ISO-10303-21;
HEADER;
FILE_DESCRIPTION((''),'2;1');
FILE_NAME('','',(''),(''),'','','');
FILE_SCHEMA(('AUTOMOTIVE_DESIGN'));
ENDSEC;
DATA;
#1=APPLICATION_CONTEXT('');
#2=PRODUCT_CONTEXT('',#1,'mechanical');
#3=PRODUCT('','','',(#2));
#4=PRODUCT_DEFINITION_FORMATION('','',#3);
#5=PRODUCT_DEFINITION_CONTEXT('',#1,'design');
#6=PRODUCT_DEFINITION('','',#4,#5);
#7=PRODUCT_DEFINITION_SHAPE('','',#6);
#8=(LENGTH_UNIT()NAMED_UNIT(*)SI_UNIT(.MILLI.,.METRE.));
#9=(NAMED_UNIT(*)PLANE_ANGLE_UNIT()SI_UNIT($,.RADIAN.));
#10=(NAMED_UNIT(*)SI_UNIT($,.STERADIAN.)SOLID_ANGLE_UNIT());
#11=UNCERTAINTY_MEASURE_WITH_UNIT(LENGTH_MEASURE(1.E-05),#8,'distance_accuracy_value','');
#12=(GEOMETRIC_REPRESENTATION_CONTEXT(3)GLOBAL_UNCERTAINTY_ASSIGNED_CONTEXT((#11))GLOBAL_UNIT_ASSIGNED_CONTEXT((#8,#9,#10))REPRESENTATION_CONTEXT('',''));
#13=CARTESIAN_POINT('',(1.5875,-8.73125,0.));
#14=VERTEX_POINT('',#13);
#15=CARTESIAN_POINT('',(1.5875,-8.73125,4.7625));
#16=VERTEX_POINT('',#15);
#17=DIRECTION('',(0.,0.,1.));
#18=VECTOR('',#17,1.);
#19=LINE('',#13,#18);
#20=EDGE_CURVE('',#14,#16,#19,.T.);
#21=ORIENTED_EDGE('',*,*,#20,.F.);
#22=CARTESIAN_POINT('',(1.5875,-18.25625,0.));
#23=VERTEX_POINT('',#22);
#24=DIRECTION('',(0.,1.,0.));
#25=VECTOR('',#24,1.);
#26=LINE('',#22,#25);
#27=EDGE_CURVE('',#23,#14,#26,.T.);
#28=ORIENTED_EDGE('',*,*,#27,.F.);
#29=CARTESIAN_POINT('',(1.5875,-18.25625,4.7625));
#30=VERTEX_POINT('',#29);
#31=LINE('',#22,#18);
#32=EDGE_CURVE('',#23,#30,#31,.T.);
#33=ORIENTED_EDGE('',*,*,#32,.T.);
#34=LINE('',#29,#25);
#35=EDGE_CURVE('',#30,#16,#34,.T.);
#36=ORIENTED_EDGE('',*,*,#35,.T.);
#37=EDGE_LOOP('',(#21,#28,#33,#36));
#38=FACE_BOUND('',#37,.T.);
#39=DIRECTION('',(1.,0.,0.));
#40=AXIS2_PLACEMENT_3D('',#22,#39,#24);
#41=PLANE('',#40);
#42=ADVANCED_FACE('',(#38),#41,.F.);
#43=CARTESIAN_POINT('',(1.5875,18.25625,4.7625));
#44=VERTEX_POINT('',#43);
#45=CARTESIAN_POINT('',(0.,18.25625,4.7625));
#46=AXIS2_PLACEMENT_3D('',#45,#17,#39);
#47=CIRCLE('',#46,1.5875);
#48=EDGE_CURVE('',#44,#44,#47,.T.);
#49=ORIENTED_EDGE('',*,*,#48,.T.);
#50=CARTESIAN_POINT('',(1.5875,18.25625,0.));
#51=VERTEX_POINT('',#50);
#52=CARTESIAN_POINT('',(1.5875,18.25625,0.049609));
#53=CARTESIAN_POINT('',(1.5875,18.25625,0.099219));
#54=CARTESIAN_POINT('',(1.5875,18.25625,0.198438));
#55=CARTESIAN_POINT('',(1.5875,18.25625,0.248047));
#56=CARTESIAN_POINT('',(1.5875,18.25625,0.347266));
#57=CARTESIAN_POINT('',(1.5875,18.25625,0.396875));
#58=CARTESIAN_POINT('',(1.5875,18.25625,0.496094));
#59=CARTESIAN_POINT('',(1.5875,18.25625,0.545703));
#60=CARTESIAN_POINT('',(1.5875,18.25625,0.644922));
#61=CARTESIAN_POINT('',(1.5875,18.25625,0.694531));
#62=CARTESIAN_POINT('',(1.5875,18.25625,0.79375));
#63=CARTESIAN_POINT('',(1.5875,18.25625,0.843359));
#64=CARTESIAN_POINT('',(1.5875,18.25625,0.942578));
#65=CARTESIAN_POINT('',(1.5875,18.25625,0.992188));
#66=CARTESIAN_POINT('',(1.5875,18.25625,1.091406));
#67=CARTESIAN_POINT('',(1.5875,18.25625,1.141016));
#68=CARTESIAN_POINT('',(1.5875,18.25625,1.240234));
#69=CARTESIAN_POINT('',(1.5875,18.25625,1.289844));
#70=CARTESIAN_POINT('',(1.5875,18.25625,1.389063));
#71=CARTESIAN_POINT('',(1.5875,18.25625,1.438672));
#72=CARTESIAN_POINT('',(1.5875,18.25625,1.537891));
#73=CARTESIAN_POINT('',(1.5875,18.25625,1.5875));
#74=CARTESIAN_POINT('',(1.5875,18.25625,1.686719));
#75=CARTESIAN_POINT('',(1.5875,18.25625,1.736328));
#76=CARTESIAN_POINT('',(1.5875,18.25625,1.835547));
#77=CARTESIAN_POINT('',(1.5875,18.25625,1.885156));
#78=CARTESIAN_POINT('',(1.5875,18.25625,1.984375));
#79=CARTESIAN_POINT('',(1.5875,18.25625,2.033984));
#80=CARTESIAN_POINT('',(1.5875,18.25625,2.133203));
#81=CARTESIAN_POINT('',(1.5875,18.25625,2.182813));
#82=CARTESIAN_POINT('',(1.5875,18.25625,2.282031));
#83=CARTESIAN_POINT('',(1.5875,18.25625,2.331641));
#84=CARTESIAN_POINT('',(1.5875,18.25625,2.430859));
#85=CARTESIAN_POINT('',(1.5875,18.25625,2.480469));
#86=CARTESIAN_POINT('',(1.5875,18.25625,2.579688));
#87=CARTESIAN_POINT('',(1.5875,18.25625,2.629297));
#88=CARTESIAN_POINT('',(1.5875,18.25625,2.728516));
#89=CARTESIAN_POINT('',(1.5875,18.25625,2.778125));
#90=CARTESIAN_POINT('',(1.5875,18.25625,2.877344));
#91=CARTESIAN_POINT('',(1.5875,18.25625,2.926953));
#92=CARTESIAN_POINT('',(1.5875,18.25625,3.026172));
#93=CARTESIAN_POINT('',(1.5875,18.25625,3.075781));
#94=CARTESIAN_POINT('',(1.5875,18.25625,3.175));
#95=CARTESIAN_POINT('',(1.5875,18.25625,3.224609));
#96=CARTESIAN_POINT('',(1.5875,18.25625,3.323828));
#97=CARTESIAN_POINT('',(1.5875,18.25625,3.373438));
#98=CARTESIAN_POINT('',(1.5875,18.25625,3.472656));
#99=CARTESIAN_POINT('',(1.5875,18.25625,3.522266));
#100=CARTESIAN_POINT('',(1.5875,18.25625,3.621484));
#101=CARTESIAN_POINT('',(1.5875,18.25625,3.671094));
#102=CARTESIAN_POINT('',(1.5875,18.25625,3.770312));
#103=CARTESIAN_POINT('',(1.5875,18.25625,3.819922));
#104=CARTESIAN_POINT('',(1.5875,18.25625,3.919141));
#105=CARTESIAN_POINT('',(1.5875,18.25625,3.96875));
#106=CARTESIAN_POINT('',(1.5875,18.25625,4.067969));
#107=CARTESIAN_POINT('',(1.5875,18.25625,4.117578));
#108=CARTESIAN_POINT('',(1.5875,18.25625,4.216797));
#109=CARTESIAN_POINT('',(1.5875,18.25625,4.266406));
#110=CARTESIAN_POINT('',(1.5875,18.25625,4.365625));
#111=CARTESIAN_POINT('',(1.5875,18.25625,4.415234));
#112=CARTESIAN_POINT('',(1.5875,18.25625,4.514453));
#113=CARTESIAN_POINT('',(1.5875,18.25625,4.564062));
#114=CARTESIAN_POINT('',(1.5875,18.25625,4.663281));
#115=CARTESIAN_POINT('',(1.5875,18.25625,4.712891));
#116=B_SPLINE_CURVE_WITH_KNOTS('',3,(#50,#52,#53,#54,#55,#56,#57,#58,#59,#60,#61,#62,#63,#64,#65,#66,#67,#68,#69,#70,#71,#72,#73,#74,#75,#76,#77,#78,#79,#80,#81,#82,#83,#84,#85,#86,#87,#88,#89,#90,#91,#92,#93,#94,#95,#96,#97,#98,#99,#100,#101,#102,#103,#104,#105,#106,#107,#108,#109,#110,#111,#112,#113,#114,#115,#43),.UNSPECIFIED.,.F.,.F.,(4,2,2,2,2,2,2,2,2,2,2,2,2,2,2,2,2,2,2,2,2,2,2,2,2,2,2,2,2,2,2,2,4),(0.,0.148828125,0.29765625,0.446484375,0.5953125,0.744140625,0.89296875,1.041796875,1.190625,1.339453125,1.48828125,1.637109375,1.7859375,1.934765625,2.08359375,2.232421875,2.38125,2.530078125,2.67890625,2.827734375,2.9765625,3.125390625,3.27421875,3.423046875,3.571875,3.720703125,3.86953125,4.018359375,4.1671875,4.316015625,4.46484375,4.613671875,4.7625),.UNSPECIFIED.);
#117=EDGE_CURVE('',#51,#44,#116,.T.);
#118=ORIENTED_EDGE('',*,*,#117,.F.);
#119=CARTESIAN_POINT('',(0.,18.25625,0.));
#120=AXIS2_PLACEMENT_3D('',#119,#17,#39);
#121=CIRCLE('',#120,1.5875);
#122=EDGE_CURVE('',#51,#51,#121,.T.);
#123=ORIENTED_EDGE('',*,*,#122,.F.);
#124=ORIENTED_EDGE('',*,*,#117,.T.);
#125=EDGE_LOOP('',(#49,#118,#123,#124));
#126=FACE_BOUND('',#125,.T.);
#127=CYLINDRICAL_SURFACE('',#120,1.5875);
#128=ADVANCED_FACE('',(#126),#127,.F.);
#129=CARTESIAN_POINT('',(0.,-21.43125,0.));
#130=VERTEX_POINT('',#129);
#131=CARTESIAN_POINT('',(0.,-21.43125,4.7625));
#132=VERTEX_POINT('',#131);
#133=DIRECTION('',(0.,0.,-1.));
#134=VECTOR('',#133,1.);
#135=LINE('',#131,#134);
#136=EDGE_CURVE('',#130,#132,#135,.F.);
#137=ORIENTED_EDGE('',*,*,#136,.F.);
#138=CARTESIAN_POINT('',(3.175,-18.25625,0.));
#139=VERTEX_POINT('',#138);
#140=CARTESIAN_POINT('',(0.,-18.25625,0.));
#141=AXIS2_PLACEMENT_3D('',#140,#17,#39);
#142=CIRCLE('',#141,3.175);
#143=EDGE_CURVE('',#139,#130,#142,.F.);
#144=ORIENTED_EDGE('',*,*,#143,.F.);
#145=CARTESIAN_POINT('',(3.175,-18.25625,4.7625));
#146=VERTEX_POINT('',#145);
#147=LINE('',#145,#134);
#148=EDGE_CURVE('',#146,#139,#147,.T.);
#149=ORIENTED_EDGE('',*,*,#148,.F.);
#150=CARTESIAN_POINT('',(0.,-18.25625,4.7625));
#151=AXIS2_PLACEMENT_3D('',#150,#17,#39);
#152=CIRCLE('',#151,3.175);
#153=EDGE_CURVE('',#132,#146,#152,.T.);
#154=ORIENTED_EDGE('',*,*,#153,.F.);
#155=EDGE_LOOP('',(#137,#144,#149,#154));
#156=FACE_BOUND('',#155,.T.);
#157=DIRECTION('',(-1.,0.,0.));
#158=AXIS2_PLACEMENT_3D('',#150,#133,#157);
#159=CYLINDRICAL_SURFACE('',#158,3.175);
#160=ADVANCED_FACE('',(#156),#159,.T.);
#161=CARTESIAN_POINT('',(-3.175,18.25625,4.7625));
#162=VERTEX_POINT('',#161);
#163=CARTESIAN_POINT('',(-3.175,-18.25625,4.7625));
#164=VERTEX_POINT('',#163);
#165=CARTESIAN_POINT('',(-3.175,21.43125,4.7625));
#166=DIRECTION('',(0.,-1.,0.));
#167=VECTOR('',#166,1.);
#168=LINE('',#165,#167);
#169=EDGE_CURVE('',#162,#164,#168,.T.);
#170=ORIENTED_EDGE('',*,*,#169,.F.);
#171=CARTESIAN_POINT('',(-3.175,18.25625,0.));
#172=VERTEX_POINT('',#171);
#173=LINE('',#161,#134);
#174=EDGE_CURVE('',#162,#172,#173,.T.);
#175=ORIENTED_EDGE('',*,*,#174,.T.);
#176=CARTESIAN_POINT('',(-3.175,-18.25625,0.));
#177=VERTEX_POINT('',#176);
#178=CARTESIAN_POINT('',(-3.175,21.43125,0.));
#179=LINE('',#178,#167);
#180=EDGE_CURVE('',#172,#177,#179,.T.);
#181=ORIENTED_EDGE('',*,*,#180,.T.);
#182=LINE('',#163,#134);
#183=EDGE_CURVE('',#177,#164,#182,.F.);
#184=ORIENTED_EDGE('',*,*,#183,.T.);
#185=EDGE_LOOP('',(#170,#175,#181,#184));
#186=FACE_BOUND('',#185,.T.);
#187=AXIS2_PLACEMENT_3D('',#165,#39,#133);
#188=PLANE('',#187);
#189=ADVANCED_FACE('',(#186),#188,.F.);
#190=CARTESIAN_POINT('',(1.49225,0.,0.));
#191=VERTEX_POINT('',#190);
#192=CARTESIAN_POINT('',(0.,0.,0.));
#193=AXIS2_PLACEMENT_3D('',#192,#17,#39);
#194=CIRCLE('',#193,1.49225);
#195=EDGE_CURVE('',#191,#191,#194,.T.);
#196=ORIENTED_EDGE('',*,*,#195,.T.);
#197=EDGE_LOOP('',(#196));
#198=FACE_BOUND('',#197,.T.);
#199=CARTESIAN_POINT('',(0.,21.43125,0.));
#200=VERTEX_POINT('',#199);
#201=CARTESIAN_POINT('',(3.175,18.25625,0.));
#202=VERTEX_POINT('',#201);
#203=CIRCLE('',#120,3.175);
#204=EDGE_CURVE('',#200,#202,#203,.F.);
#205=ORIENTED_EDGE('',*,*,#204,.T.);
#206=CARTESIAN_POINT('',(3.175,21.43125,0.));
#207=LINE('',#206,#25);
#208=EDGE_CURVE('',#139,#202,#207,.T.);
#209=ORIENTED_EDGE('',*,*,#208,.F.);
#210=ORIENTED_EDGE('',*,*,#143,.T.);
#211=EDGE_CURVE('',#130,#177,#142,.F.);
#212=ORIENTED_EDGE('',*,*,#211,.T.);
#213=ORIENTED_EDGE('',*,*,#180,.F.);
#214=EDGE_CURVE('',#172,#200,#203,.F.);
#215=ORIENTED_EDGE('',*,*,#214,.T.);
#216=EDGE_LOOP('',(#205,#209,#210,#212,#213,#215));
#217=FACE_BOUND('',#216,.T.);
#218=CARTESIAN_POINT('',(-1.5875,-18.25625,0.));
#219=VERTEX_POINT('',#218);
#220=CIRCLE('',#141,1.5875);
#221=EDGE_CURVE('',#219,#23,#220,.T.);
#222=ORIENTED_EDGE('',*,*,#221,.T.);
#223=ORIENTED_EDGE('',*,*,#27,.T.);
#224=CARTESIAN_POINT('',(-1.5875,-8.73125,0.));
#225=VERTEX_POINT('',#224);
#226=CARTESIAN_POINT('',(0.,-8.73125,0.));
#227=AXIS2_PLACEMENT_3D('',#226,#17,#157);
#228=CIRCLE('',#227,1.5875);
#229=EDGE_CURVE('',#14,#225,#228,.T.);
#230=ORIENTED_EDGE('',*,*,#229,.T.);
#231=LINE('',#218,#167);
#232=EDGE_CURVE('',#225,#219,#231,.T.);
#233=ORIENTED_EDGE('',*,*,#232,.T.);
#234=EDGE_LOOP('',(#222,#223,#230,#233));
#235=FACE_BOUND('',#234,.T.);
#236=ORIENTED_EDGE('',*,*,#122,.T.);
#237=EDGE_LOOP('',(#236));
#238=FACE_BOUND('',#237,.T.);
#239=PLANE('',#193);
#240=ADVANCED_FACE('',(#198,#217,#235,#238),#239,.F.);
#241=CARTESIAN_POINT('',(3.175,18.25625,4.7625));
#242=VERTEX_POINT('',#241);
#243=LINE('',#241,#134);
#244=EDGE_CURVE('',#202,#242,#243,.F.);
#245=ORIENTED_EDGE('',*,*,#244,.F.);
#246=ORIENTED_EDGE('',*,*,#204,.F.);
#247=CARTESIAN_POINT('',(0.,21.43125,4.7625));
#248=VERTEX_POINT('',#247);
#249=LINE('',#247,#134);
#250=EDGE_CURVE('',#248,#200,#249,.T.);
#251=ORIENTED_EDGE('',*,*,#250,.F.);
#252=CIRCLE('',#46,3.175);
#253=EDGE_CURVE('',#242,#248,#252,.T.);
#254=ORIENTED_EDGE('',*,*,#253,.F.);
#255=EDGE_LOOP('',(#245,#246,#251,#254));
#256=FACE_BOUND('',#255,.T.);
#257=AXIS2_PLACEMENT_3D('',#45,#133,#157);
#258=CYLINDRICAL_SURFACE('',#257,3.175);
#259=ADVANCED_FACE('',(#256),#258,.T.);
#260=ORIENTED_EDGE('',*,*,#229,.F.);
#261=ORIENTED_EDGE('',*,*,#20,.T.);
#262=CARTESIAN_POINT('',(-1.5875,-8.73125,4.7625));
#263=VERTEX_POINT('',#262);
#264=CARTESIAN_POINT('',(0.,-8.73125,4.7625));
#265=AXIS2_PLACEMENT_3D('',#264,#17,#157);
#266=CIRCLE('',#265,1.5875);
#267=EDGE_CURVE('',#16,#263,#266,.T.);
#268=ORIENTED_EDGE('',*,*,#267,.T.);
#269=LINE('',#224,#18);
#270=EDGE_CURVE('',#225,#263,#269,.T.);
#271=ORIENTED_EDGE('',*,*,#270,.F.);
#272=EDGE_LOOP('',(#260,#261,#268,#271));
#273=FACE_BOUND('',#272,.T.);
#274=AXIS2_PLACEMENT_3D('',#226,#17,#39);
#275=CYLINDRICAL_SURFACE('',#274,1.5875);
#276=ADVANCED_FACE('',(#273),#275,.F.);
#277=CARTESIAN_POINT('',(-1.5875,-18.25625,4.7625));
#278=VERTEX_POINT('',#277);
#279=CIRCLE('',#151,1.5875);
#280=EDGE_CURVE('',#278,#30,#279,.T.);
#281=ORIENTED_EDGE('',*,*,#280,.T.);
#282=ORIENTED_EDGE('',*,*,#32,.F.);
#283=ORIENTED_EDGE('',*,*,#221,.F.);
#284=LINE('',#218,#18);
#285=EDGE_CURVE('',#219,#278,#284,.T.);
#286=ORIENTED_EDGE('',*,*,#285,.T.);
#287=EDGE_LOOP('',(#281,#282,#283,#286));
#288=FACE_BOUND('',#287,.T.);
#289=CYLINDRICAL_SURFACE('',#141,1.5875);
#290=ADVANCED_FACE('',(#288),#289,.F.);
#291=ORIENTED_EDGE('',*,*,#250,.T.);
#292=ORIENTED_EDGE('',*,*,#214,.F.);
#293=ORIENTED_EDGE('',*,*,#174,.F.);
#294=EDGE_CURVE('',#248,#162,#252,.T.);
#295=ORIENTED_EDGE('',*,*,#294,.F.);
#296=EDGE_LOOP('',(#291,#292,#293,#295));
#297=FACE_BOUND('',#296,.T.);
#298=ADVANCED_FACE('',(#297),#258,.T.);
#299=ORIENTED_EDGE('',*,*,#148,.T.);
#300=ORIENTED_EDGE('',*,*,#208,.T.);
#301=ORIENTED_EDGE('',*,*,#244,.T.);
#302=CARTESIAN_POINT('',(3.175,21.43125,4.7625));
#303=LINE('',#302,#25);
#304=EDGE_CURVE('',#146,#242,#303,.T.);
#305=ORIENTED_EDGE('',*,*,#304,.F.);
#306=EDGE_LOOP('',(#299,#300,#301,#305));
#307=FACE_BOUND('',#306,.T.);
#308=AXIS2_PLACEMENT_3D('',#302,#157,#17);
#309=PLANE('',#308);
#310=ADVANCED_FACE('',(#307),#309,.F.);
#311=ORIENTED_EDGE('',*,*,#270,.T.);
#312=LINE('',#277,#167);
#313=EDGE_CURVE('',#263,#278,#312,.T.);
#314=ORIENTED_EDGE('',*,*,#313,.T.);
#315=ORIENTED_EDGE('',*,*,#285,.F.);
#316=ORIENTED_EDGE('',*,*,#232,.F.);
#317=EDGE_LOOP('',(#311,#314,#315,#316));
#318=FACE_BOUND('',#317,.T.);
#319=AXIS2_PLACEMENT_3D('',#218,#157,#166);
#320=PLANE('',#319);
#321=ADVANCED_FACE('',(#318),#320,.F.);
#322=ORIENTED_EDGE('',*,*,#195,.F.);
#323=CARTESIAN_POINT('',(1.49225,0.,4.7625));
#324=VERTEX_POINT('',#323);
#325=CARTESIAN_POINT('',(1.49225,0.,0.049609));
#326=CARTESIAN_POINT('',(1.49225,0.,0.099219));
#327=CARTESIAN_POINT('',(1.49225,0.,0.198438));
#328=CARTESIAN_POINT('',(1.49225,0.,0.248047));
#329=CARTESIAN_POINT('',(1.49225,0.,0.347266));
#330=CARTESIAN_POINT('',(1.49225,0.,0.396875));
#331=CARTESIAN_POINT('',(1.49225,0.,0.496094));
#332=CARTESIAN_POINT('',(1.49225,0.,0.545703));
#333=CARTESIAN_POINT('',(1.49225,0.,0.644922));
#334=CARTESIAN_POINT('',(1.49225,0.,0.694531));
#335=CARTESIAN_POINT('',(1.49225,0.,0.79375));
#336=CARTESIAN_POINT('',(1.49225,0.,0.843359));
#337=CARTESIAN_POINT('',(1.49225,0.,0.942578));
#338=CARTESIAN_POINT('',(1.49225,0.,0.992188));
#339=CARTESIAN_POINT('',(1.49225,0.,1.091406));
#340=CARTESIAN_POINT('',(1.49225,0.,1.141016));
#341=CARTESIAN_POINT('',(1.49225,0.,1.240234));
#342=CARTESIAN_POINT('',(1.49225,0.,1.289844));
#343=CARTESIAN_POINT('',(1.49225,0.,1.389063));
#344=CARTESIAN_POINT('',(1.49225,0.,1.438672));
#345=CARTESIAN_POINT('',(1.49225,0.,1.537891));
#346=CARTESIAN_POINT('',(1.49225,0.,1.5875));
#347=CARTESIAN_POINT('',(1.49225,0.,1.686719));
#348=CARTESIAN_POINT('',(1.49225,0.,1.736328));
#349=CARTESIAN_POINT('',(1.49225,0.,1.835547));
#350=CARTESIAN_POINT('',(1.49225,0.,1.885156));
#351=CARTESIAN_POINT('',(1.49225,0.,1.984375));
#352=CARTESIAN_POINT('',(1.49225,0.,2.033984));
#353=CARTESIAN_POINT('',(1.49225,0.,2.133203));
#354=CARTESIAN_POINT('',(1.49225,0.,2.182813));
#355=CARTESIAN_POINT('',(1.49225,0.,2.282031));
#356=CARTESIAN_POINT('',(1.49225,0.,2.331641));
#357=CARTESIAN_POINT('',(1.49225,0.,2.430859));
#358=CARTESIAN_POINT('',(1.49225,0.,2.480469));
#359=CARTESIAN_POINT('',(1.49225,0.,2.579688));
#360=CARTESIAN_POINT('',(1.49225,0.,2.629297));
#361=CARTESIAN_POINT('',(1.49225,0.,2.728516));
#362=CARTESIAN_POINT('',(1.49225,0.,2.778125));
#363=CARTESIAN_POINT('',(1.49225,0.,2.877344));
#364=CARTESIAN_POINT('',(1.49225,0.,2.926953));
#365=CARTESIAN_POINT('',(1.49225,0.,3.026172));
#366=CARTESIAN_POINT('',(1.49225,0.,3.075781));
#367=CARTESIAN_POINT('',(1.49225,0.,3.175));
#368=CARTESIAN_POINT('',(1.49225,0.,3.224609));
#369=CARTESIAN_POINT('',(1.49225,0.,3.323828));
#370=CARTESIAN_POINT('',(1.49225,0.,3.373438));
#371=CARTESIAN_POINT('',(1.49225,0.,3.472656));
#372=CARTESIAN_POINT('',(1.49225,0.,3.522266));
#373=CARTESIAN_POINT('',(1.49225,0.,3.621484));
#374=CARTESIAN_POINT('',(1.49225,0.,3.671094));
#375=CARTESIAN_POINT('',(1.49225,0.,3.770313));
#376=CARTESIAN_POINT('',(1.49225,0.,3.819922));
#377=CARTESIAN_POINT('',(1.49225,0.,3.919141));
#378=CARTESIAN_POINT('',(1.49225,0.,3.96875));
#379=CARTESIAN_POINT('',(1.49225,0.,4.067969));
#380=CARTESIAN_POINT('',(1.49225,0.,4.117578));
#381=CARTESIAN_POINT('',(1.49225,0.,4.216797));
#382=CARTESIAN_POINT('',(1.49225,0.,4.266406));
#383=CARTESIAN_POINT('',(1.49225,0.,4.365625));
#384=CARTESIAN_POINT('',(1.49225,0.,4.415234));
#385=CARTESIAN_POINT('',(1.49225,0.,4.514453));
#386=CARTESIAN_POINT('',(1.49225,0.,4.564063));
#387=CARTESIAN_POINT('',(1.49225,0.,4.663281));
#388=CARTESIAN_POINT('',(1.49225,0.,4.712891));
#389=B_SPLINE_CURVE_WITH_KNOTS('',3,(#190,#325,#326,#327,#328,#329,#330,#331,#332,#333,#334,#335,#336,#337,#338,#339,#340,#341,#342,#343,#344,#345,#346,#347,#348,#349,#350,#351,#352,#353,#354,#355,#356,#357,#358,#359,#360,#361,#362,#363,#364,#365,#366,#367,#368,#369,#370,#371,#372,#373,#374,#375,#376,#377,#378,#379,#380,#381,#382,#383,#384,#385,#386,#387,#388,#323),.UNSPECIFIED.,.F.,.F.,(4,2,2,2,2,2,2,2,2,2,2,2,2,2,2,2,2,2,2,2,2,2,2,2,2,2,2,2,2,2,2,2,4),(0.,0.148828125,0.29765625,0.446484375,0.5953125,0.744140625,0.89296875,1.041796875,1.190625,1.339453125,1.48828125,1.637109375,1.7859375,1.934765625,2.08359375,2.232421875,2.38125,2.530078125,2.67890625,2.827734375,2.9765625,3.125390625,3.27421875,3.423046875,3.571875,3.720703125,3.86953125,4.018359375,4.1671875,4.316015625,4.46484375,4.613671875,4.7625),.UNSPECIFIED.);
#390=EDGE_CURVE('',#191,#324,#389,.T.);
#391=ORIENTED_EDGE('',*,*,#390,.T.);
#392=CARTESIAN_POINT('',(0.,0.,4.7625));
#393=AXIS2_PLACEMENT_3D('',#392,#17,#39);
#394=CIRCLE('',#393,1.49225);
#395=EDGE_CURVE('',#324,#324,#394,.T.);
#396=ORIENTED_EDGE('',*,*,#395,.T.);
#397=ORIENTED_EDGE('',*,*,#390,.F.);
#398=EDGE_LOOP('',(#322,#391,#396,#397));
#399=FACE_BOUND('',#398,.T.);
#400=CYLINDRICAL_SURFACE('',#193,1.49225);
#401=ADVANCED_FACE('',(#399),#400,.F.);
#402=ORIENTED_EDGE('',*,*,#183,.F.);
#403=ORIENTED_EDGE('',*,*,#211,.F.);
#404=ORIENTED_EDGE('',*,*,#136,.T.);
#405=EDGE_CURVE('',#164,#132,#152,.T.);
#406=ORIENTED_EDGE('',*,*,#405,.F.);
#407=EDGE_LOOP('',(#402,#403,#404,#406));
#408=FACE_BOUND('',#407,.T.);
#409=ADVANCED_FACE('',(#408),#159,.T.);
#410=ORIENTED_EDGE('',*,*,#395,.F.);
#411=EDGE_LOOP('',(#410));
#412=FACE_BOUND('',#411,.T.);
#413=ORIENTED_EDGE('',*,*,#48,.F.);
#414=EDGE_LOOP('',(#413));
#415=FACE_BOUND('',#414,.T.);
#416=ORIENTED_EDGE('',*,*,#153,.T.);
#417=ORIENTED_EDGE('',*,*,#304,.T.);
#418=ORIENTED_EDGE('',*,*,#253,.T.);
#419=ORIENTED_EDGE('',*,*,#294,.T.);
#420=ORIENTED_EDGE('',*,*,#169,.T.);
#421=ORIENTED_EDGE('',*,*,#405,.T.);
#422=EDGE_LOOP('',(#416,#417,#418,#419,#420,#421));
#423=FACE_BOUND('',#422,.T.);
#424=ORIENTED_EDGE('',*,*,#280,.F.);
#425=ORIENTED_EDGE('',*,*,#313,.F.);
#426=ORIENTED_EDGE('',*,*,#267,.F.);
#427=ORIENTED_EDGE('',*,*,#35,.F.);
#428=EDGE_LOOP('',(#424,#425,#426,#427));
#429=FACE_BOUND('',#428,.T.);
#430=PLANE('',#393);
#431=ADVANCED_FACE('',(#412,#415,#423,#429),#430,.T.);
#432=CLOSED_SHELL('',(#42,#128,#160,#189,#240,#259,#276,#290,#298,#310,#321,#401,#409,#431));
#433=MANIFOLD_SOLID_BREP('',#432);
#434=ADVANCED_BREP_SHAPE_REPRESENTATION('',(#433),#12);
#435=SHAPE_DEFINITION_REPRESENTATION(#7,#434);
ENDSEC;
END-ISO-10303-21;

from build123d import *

# Parameters (mm, degrees)
SKETCH1_W           = 6.35
SKETCH1_H           = 42.8625
BOSS_EXTRUDE1_DEPTH = 4.7625
SKETCH2_R           = 1.49225
CUT_EXTRUDE1_DEPTH  = 23.182436922
SKETCH3_R           = 1.5875
CUT_EXTRUDE2_DEPTH  = 23.182436922
FILLET1_R           = 3.175


with BuildPart() as part:
    # Sketch1 → Boss-Extrude1 (new body)
    with BuildSketch(Plane.XY):
        Rectangle(SKETCH1_W, SKETCH1_H)
    extrude(amount=BOSS_EXTRUDE1_DEPTH)

    # Sketch2 → Cut-Extrude1 (cut, through all)
    with BuildSketch(Plane.XY.offset(4.7625)):
        Circle(SKETCH2_R)
    extrude(amount=-CUT_EXTRUDE1_DEPTH, mode=Mode.SUBTRACT)

    # Sketch3 → Cut-Extrude2 (cut, through all)
    with BuildSketch(Plane.XY.offset(4.7625)):
        with Locations((0, 18.25625)):
            Circle(SKETCH3_R)
        with BuildLine():
            Line((1.5875, -18.25625), (1.5875, -8.73125))
            ThreePointArc((1.5875, -8.73125), (0, -7.14375), (-1.5875, -8.73125))
            Line((-1.5875, -8.73125), (-1.5875, -18.25625))
            ThreePointArc((-1.5875, -18.25625), (0, -19.84375), (1.5875, -18.25625))
        make_face()
    extrude(amount=-CUT_EXTRUDE2_DEPTH, mode=Mode.SUBTRACT)

    # Fillet1
    fillet1_edges = [part.edges().sort_by_distance(p)[0] for p in [
        (-3.175, 21.43125, 2.38125),
        (3.175, 21.43125, 2.38125),
        (-3.175, -21.43125, 2.38125),
        (3.175, -21.43125, 2.38125),
    ]]
    fillet(fillet1_edges, radius=FILLET1_R - 0.0001)  # a hair under: the kernel refuses the full size


solid = part.part
